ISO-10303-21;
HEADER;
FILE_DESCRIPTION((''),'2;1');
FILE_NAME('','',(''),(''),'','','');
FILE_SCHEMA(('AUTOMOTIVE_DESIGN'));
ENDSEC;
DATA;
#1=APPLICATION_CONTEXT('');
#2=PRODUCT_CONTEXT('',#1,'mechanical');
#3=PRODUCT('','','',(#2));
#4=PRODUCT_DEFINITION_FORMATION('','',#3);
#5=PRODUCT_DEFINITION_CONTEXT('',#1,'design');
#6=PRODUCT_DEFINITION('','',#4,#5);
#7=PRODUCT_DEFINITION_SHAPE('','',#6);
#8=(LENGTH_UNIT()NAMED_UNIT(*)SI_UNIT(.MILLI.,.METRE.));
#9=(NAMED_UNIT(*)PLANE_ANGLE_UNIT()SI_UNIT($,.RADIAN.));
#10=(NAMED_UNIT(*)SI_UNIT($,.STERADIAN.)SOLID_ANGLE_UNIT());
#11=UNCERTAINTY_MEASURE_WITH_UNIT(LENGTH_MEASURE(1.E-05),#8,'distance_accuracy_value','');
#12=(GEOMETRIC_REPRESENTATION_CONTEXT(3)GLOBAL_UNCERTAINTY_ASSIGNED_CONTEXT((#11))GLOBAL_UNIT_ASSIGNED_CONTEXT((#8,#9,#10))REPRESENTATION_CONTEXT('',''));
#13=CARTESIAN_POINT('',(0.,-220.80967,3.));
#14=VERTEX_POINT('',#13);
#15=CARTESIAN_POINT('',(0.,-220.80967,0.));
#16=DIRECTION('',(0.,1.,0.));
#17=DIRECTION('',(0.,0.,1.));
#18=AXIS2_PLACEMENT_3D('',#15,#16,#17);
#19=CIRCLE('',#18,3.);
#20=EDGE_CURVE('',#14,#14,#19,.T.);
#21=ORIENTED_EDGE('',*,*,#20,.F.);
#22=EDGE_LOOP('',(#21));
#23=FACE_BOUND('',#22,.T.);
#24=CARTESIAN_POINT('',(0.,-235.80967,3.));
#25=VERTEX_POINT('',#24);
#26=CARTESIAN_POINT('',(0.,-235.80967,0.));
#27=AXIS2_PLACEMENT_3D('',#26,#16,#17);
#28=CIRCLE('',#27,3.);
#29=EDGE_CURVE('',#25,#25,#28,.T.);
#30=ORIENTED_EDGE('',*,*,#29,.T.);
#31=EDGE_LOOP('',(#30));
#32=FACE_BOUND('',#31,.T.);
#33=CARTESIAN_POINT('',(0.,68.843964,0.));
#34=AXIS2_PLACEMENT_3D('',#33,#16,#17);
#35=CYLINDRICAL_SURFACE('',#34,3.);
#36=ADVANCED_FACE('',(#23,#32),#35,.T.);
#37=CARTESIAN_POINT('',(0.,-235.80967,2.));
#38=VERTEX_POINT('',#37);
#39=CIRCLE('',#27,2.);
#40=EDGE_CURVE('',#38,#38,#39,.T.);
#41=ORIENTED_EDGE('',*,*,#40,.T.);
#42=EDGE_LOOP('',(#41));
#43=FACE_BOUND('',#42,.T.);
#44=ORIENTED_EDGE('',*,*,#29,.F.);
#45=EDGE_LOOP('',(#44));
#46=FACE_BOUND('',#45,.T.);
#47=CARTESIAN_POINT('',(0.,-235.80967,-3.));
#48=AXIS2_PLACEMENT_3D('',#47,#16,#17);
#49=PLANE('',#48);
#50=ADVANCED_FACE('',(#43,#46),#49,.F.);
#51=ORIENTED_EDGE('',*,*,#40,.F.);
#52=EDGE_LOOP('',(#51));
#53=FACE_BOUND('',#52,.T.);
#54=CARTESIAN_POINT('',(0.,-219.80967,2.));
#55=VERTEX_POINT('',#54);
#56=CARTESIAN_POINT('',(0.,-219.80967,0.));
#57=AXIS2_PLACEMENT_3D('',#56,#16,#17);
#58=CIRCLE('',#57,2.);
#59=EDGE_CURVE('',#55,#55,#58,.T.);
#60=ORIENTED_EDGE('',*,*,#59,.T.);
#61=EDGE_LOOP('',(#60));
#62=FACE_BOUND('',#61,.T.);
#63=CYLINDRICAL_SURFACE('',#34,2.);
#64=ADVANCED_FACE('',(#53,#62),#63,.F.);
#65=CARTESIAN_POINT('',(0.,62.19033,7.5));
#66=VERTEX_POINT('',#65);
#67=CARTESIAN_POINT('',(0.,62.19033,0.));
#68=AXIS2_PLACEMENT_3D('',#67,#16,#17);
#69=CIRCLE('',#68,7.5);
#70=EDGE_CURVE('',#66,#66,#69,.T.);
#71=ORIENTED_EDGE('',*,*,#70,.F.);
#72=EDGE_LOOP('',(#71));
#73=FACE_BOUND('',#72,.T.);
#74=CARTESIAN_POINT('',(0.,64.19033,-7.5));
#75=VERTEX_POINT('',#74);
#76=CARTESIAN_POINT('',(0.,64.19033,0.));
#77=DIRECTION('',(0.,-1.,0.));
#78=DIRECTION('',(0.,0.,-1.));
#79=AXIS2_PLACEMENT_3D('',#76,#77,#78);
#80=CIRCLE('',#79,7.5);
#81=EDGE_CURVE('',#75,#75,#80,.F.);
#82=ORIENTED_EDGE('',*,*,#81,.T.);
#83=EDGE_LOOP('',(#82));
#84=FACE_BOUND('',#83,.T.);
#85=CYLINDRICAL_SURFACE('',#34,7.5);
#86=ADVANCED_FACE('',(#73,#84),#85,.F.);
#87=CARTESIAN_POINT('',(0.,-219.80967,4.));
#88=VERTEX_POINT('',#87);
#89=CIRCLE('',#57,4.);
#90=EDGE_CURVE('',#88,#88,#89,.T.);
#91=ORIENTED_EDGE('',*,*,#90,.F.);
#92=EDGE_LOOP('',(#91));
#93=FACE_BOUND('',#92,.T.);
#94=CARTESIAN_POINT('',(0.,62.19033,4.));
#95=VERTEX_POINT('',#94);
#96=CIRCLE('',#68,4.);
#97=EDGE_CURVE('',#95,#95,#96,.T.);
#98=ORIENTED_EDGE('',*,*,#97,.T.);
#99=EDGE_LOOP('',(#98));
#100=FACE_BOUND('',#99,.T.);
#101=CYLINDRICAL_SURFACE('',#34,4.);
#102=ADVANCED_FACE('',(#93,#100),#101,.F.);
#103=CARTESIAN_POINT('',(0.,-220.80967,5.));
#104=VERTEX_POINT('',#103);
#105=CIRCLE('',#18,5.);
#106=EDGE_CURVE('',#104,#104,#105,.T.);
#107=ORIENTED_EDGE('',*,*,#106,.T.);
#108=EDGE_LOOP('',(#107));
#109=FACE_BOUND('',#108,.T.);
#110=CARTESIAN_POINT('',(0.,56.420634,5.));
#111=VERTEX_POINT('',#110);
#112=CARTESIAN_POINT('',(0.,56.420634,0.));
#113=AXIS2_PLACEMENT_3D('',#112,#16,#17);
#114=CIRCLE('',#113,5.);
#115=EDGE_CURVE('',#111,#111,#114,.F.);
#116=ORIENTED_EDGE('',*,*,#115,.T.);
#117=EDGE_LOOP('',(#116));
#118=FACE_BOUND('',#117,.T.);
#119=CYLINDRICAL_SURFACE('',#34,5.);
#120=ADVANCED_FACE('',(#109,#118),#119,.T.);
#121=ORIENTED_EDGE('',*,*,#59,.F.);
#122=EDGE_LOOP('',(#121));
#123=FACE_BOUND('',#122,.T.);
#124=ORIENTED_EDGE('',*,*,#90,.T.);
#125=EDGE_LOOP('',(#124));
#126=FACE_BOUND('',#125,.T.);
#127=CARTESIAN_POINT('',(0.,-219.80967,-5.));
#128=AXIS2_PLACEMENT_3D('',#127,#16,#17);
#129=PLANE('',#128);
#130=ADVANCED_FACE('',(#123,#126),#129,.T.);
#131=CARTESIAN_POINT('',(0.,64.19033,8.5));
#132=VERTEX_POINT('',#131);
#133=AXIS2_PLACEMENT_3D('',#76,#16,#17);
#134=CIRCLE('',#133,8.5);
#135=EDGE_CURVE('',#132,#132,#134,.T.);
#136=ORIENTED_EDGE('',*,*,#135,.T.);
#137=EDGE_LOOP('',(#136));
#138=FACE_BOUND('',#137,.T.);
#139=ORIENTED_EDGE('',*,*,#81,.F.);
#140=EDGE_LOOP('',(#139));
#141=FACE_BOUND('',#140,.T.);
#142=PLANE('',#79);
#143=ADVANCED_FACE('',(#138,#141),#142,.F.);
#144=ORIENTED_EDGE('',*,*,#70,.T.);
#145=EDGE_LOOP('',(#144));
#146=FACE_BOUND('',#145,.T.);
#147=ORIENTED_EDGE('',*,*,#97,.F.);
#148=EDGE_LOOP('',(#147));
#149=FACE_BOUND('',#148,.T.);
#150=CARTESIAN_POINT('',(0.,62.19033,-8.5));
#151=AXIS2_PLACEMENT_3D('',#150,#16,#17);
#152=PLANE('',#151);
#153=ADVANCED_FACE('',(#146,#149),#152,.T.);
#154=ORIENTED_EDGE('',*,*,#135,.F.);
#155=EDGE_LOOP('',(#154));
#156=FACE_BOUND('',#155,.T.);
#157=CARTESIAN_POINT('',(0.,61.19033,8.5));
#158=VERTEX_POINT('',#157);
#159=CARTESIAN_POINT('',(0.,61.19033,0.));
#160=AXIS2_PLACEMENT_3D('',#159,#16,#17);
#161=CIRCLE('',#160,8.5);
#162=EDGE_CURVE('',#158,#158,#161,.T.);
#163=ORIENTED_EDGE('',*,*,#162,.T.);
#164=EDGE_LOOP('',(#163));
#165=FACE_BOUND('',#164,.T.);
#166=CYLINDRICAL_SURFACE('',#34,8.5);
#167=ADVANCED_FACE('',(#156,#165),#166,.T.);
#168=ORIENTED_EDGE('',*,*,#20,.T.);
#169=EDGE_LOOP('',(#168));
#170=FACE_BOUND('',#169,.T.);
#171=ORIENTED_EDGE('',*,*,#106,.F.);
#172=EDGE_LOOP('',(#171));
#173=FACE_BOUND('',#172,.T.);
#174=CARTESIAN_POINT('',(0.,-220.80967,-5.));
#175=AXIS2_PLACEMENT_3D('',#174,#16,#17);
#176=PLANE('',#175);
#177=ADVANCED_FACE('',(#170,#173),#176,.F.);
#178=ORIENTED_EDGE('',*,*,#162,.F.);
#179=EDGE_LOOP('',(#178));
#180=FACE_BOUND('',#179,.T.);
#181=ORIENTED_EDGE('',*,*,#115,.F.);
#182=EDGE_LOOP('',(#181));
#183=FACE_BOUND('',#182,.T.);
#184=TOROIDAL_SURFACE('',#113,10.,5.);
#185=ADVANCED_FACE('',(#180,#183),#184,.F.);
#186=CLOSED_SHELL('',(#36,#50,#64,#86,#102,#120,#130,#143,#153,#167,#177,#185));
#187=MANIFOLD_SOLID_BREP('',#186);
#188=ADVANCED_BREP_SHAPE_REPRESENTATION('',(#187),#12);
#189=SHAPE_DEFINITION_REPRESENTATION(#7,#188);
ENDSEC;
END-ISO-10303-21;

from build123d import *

# Parameters (mm, degrees)
SHELL1_T           = -1
SKETCH2_R          = 2
CUT_EXTRUDE1_DEPTH = 300.241541234
FILLET1_R          = 5


with BuildPart() as part:
    # Sketch1 → Revolve1 (revolve)
    with BuildSketch(Plane(origin=(0, 0, 0), x_dir=(0, 0, -1), z_dir=(1, 0, 0)), mode=Mode.PRIVATE) as revolve1_sk:
        Polygon((0, 64.190330059), (8.5, 64.190330059), (8.5, 61.190330059), (5, 61.190330059), (5, -220.809669941), (3, -220.809669941), (3, -235.809669941), (0, -235.809669941), align=None)
    revolve(revolve1_sk.sketch.rotate(Axis((0, 68.843964237, 0), (0, -1, 0)), 180), axis=Axis((0, 68.843964237, 0), (0, -1, 0)))

    # Shell1
    shell1_openings = [part.faces().sort_by_distance(p)[0] for p in [
        (0, 64.190330059, 0),
    ]]
    offset(amount=SHELL1_T, openings=shell1_openings, kind=Kind.INTERSECTION)

    # Sketch2 → Cut-Extrude1 (cut, through all)
    with BuildSketch(Plane(origin=(0, -234.809669941, 0), x_dir=(1, 0, 0), z_dir=(0, 1, 0))):
        with Locations(Location((0, 0, 0), (0, 0, 270))):
            Circle(SKETCH2_R)
    extrude(amount=-CUT_EXTRUDE1_DEPTH, mode=Mode.SUBTRACT)

    # Fillet1
    # the kernel refuses this fillet: 5 mm, written as the material it adds along each edge
    with BuildSketch(Plane(origin=(0, 61.190330059, 0), x_dir=(0, 0, 1), z_dir=(1, 0, 0))) as fillet1_piece_1:
        with BuildLine():
            CenterArc((10, 4.769696007), FILLET1_R, 180, 72.542396876)
            Line((5, 4.769696007), (4.9, 4.769696007))
            Line((4.9, 4.769696007), (4.9, 0))
            Line((4.9, 0), (5, -0.1))
            ThreePointArc((5, -0.1), (6.75, -0.1), (8.47, -0.09539392))
            Line((8.47, -0.09539392), (8.5, 0))
        make_face()
    revolve(axis=Axis((0, 61.190330059, 0), (0, -1, 0)))


solid = part.part
